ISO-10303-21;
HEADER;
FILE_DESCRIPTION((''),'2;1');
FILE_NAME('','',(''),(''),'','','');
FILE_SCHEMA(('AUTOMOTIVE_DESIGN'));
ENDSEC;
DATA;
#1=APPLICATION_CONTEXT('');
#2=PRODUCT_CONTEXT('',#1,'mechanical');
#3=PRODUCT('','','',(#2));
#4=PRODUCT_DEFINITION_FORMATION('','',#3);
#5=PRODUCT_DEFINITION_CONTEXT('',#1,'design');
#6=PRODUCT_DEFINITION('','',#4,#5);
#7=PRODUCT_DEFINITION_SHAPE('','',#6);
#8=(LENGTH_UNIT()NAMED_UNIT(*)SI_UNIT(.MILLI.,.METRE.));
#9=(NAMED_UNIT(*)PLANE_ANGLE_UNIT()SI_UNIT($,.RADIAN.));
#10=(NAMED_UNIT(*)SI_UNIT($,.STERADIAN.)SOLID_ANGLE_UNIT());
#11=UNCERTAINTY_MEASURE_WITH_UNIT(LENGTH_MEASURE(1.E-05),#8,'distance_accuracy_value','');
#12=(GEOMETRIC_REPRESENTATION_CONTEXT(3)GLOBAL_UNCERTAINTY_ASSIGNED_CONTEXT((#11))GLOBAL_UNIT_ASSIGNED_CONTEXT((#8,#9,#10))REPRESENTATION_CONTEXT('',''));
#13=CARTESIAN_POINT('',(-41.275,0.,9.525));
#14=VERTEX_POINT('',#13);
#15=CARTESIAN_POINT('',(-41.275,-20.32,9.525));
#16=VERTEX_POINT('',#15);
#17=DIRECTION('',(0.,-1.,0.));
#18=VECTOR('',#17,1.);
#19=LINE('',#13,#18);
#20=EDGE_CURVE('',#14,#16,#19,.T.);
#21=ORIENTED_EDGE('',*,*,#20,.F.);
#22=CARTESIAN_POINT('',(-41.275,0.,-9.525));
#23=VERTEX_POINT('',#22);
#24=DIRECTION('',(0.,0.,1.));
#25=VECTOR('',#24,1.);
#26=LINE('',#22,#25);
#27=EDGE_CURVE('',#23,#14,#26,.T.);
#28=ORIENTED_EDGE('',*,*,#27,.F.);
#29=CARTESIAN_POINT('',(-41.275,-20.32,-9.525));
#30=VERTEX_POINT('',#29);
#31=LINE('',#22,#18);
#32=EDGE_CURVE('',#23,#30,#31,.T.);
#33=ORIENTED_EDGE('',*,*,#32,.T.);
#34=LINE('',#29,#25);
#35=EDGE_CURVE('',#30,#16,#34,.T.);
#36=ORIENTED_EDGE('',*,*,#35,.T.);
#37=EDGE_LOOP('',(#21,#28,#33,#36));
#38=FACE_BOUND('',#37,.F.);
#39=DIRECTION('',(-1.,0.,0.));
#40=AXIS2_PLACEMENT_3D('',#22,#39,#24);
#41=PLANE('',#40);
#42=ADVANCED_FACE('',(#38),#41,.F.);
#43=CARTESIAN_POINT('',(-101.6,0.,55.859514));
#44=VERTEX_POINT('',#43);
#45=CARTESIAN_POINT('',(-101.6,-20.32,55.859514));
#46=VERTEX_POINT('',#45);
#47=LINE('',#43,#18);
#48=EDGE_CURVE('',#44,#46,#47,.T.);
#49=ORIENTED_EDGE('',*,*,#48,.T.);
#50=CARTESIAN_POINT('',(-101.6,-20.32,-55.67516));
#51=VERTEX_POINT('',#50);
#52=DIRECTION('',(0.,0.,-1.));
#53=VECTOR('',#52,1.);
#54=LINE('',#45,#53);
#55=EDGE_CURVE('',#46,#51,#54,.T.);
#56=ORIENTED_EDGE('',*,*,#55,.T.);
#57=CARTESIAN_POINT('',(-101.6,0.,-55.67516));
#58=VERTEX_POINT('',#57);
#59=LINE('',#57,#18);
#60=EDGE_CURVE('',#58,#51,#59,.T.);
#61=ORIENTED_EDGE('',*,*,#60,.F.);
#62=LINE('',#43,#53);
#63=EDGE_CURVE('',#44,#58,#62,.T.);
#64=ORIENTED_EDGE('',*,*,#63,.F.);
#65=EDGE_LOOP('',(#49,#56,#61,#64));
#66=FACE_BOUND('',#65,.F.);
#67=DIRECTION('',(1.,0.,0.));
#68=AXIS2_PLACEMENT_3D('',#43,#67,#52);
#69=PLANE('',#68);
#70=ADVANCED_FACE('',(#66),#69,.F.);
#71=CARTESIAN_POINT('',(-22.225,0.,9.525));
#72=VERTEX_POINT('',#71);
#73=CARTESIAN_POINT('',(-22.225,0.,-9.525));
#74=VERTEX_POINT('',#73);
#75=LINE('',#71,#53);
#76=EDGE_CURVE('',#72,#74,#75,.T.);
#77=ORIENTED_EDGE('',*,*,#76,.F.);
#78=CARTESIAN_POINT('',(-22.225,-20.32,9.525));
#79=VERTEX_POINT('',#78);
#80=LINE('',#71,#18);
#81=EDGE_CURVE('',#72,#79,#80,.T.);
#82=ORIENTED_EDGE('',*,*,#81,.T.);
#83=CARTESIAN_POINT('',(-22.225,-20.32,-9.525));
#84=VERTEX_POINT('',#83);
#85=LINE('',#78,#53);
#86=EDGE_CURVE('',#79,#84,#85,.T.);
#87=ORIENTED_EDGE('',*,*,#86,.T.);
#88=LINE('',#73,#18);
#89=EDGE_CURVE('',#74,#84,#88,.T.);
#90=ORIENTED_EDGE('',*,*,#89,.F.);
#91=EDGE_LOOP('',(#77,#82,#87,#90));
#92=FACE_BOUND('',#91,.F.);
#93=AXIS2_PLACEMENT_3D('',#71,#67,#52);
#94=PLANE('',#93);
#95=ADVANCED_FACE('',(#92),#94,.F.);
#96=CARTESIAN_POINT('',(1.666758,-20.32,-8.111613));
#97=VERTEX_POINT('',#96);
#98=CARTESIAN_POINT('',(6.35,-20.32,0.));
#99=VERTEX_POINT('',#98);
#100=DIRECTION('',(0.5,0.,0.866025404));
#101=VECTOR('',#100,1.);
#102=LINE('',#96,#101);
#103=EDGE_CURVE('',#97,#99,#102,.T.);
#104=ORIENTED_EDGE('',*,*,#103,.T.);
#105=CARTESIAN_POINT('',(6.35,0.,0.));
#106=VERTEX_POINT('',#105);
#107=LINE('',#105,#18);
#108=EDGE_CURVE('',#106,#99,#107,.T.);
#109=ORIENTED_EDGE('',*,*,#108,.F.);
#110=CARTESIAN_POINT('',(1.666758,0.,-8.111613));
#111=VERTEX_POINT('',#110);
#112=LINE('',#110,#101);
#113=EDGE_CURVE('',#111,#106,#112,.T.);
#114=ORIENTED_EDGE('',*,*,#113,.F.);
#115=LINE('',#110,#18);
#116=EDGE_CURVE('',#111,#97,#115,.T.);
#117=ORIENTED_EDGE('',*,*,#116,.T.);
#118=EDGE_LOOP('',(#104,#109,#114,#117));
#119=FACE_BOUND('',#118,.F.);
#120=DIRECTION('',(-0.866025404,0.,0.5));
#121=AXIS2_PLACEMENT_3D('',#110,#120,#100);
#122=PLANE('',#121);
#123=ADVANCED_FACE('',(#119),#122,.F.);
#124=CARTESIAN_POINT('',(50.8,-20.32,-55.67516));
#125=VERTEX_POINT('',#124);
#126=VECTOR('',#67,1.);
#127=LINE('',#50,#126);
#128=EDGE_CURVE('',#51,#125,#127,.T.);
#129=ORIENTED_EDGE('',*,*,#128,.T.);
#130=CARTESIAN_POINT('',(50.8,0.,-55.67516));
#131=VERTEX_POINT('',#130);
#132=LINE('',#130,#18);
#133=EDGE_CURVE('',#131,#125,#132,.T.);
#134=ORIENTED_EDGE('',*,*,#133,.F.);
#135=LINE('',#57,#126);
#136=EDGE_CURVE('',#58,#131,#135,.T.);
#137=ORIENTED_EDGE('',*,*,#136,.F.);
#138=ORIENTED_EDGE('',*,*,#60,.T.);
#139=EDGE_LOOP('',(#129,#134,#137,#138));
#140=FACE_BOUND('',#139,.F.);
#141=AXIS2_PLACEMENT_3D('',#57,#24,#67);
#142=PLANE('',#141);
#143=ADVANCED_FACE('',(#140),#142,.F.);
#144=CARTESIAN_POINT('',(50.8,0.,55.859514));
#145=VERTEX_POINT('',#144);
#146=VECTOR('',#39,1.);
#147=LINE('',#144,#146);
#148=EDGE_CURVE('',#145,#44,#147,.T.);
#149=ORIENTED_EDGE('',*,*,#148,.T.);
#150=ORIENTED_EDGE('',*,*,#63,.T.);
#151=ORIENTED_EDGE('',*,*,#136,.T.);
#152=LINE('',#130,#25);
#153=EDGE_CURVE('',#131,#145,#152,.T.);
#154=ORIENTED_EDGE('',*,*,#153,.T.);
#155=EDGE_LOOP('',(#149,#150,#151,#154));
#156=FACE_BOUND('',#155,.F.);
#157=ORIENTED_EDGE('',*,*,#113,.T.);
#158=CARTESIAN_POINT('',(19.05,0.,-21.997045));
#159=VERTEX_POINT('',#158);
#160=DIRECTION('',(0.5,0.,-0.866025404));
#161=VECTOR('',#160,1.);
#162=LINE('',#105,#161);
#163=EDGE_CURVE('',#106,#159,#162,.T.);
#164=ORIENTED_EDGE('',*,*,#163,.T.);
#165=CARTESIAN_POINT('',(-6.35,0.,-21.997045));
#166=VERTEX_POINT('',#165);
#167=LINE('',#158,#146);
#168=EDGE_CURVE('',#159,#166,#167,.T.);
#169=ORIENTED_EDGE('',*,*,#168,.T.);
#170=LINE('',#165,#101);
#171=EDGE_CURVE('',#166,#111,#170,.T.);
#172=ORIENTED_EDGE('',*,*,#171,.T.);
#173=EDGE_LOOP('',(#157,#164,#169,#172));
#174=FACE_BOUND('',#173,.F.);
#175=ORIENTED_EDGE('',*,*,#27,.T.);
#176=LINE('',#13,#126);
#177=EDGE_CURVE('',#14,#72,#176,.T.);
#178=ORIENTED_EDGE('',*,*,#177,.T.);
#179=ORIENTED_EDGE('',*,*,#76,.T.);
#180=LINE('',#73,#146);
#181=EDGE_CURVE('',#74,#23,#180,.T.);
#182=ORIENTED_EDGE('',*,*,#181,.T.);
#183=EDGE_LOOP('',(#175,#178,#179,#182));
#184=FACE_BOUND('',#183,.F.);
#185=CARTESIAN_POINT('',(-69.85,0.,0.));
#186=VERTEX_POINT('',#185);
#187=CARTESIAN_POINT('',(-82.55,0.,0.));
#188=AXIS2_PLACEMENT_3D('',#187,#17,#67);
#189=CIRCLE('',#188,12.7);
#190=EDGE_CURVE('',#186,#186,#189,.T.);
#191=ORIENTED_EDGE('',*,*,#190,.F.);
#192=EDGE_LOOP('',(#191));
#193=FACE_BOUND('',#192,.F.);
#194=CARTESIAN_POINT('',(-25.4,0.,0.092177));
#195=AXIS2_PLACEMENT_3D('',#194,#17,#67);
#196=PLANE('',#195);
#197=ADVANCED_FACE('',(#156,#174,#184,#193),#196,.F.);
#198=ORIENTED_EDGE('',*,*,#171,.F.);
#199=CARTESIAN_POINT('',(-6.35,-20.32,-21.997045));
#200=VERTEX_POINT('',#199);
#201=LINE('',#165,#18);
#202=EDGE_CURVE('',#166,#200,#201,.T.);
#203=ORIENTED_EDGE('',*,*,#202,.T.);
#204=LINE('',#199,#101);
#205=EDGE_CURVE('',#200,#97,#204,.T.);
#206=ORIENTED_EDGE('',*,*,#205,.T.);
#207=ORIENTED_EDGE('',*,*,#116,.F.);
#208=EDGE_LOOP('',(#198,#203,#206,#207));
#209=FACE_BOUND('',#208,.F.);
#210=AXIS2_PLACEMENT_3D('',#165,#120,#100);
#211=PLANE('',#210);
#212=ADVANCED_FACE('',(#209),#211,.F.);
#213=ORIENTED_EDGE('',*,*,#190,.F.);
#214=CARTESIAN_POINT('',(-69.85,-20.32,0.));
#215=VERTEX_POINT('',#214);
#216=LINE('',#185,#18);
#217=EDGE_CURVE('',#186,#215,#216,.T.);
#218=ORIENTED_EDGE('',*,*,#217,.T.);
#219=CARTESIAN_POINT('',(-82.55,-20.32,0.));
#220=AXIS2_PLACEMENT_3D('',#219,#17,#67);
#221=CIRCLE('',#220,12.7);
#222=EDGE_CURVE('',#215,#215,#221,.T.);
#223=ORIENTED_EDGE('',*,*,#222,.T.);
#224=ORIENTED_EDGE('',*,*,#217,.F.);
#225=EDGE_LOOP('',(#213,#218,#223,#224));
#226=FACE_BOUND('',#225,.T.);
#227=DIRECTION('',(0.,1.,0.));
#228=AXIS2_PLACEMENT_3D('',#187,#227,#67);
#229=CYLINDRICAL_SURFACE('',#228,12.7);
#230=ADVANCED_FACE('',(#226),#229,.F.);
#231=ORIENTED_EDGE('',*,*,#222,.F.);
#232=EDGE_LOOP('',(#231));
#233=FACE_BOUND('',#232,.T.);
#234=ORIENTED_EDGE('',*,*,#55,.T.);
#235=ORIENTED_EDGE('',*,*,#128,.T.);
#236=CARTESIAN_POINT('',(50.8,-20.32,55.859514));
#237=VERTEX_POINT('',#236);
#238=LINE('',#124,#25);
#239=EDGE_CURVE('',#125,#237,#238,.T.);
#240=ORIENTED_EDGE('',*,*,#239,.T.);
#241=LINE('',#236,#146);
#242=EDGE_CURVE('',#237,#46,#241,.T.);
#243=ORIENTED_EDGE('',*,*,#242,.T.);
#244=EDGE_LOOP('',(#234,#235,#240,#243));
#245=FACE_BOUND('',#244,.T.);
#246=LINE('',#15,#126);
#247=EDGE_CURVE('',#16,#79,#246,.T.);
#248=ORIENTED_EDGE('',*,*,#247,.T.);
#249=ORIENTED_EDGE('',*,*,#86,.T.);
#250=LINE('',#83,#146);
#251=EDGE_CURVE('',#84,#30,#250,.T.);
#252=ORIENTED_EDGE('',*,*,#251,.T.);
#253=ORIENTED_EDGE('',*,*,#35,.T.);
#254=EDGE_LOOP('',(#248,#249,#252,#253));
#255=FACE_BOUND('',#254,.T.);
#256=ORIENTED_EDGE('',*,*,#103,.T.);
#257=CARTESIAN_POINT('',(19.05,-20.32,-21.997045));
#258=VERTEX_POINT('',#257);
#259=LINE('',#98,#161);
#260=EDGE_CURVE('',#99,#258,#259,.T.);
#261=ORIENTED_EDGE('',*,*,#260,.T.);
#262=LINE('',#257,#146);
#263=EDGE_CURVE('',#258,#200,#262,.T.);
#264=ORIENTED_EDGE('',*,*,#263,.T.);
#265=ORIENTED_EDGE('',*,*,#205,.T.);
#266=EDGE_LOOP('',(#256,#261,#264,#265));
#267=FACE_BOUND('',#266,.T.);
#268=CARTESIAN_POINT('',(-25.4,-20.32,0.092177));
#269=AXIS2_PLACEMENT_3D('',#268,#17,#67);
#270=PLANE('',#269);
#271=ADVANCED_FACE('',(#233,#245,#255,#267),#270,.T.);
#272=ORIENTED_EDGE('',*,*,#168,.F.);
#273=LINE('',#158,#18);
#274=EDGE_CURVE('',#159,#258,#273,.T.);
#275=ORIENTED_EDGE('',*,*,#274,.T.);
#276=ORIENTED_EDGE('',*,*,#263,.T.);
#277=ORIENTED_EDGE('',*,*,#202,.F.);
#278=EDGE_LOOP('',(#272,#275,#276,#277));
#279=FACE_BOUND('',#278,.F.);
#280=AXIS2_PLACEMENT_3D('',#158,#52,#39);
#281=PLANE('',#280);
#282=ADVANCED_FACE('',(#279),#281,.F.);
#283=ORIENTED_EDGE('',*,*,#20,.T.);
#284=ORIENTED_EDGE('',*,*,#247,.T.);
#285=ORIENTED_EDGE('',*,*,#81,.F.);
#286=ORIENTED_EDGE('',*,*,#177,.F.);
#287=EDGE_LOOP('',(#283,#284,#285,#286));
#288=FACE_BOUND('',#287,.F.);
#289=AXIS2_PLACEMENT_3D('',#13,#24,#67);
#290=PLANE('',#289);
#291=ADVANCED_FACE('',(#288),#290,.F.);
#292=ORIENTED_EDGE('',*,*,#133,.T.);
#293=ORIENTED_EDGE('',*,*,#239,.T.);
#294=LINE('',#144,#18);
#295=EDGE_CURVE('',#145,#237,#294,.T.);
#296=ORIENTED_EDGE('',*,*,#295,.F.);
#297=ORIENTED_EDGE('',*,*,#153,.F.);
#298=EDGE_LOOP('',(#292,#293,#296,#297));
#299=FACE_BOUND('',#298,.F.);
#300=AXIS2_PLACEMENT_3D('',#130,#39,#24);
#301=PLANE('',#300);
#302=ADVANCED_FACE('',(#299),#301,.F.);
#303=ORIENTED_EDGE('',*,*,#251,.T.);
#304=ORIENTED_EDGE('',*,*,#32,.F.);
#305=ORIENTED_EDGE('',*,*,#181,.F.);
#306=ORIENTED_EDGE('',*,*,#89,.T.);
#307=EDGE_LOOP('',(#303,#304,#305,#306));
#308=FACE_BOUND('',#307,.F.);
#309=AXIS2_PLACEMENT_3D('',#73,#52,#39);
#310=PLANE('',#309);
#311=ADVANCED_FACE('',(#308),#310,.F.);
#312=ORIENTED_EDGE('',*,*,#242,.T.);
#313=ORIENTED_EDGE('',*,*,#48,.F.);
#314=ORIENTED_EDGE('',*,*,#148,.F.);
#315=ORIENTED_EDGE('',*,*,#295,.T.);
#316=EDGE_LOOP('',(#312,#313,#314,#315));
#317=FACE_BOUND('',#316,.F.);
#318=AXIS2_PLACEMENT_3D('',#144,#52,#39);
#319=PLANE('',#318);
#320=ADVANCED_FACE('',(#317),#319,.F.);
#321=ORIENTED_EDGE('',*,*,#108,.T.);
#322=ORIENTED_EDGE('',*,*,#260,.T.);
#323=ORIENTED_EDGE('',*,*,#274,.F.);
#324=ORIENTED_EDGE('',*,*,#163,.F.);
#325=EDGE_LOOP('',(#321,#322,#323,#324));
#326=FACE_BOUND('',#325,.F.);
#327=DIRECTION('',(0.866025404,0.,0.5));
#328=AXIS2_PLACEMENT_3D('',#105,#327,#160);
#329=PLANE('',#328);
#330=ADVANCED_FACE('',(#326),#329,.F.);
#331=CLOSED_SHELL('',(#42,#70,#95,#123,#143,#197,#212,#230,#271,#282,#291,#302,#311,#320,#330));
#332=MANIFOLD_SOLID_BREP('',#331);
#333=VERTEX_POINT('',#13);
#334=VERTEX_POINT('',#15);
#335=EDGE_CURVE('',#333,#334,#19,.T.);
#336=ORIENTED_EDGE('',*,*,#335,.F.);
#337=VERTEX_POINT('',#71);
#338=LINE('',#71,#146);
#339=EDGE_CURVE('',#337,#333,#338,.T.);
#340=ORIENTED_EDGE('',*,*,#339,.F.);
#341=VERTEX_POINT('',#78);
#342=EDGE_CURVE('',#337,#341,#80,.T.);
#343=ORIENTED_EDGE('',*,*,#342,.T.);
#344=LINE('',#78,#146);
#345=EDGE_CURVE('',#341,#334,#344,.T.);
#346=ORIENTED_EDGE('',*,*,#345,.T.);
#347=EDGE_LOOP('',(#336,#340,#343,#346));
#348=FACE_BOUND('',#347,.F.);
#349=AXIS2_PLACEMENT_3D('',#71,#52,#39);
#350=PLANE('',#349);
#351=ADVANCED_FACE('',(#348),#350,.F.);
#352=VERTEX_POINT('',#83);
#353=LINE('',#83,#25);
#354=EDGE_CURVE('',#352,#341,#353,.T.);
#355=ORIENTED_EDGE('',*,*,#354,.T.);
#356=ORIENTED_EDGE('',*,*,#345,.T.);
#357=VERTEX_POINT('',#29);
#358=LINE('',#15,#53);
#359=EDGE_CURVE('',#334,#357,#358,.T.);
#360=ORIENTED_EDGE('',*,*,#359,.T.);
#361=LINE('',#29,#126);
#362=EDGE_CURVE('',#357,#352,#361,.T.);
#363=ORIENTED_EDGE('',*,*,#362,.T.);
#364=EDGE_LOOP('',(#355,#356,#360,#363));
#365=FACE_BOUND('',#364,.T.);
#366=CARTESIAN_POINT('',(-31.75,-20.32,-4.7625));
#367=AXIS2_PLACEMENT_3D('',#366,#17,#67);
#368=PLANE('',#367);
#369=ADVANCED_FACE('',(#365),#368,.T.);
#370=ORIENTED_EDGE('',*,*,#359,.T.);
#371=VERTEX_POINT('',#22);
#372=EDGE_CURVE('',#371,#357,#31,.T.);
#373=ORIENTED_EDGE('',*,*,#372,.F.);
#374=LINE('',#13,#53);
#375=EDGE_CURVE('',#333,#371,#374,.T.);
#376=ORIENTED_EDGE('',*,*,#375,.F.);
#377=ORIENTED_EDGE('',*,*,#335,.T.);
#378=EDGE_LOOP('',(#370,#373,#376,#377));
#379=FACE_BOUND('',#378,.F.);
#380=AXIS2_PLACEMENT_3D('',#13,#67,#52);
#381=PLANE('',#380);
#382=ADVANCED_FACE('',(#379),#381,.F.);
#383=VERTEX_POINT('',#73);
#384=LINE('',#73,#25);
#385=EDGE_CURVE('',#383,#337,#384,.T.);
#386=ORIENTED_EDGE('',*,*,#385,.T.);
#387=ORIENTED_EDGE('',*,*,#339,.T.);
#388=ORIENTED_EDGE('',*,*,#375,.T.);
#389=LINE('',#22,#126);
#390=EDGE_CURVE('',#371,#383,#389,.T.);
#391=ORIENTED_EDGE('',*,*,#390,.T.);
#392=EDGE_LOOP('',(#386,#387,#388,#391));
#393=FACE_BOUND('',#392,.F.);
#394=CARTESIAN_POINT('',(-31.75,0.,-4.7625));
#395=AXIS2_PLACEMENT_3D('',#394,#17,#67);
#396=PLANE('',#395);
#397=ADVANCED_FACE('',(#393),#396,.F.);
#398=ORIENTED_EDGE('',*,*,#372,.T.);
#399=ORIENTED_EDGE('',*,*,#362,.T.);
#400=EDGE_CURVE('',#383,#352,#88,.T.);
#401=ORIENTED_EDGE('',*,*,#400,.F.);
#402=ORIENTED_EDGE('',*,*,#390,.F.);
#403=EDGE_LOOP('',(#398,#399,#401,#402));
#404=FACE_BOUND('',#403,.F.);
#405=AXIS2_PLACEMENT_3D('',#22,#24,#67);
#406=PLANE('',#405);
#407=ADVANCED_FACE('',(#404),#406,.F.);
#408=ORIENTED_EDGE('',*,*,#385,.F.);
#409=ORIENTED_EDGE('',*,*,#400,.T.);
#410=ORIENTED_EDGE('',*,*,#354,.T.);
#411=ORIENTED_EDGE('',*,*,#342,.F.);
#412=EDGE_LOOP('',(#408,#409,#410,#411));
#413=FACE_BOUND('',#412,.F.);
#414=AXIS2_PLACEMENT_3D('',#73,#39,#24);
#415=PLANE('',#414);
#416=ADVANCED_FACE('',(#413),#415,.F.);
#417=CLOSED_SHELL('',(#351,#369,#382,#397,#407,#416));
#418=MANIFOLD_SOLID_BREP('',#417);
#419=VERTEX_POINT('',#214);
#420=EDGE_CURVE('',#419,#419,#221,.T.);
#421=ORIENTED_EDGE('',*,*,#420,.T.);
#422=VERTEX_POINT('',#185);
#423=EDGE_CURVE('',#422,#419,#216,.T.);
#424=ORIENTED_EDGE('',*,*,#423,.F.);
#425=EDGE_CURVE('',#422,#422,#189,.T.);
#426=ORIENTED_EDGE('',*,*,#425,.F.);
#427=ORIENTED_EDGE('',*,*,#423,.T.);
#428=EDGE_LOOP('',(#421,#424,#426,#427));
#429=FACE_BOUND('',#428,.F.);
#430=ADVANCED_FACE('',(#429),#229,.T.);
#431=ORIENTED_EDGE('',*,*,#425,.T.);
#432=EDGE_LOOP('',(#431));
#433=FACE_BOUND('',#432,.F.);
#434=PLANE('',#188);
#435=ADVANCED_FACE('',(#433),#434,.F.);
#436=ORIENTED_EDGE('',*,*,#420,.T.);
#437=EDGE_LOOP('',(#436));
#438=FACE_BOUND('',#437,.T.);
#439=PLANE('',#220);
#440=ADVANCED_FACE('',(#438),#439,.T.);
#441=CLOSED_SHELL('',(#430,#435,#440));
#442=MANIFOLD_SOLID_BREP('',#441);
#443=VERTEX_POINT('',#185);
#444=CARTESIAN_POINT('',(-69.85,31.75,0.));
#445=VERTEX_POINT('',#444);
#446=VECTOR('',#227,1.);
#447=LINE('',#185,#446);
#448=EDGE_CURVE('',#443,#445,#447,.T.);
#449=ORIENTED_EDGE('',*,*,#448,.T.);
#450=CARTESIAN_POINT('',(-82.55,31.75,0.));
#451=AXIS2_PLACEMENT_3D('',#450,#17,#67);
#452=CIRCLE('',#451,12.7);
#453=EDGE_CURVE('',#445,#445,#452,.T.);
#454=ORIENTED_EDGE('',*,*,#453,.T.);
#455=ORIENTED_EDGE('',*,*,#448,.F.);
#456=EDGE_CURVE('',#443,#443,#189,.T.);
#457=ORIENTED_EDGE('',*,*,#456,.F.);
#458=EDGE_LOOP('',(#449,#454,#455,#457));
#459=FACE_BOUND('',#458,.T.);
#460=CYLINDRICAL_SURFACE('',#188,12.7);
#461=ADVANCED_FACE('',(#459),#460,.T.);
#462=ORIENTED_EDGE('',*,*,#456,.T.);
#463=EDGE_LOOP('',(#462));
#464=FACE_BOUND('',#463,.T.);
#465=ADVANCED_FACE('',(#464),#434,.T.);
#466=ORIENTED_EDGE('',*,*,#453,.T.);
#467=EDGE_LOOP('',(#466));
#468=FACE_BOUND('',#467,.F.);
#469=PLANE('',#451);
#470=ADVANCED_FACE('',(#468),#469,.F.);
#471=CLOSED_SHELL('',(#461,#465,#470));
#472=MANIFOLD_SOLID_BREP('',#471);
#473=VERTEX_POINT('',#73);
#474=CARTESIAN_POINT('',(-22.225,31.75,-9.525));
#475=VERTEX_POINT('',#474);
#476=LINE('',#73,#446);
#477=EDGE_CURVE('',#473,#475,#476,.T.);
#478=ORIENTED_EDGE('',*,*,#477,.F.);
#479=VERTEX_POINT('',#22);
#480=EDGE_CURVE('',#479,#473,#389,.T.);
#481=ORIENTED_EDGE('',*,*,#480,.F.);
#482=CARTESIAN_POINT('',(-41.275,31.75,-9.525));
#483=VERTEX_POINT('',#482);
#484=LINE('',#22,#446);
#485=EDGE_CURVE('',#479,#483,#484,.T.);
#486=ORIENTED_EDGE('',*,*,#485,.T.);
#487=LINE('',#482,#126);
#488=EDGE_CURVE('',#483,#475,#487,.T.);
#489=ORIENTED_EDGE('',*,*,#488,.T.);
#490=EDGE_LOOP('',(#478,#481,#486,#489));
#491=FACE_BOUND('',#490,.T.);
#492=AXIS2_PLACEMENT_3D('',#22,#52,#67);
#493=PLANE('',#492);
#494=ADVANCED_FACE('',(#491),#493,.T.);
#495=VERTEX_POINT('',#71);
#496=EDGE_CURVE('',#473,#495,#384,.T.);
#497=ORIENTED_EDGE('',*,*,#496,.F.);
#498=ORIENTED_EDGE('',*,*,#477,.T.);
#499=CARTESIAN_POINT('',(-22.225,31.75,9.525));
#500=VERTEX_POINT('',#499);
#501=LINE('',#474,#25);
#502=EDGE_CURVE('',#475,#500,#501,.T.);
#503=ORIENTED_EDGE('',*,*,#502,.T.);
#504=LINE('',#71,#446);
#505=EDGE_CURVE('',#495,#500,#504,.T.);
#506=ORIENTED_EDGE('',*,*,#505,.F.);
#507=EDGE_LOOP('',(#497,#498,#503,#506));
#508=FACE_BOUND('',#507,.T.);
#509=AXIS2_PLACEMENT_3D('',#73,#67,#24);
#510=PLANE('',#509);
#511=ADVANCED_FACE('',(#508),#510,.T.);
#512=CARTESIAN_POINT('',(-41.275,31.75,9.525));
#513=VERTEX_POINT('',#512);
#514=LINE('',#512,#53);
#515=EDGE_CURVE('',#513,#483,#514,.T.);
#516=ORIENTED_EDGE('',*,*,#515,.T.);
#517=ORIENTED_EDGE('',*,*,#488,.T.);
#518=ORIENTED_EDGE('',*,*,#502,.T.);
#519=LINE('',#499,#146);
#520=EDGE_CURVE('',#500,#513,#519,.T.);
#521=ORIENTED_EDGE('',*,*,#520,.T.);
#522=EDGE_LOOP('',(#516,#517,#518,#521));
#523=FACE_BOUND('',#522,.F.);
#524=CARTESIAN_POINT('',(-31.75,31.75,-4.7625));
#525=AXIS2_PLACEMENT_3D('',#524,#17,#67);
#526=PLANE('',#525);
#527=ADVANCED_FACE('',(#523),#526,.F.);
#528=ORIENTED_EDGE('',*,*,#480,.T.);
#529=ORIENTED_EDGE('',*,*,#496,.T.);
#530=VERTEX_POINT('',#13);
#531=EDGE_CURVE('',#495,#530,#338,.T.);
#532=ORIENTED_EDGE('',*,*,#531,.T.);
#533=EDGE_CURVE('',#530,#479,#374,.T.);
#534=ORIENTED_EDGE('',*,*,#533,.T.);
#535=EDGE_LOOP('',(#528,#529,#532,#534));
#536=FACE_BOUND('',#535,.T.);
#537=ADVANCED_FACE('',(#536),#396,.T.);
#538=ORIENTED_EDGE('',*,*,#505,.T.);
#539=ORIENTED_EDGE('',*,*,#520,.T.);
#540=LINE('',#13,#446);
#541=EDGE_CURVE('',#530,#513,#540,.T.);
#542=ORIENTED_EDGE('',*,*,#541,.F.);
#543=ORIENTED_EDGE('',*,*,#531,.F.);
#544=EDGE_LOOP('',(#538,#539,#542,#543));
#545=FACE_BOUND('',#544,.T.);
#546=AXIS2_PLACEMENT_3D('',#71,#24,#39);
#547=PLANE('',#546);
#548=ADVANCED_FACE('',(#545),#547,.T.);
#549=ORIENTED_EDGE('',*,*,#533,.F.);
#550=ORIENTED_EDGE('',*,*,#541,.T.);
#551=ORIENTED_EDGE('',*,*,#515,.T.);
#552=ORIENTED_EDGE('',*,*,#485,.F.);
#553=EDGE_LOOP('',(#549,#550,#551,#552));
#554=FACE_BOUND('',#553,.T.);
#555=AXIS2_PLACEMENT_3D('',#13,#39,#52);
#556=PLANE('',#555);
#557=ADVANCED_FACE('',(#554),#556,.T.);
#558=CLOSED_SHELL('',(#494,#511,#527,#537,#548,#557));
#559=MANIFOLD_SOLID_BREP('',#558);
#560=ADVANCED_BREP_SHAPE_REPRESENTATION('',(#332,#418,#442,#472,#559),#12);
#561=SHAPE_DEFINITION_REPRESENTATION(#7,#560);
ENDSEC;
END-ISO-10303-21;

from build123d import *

# Parameters (mm, degrees)
F0_R     = 12.7
F1_DEPTH = 20.32
F2_DEPTH = 31.75
F3_DEPTH = 20.32


with BuildPart() as f1:
    # F0 (on Front) → F1 (new body)
    with BuildSketch(Plane.XZ):
        Polygon((50.8, -55.6751601398), (50.8, 0), (50.8, 55.8595135808), (-101.6, 55.8595135808), (-101.6, -55.6751601398), align=None)
        with Locations((-82.55, 0)):
            Circle(F0_R, mode=Mode.SUBTRACT)
        Polygon((-22.225, 9.525), (-22.225, 0), (-22.225, -9.525), (-41.275, -9.525), (-41.275, 0), (-41.275, 9.525), align=None, mode=Mode.SUBTRACT)
        Polygon((1.6667581252, -8.1116128713), (6.35, 0), (19.05, -21.9970452561), (-6.35, -21.9970452561), align=None, mode=Mode.SUBTRACT)
    extrude(amount=F1_DEPTH)


with BuildPart() as f2:
    # F0 (on Front) → F2 (new body)
    with BuildSketch(Plane.XZ):
        with Locations((-82.55, 0)):
            Circle(F0_R)
    extrude(amount=-F2_DEPTH)


with BuildPart() as f2b:
    # F0 (on Front) → F2, piece 2 (new body)
    with BuildSketch(Plane.XZ):
        Polygon((-22.225, -9.525), (-22.225, 0), (-31.75, 0), (-41.275, 0), (-41.275, -9.525), align=None)
        Polygon((-31.75, 0), (-22.225, 0), (-22.225, 9.525), (-41.275, 9.525), (-41.275, 0), align=None)
    extrude(amount=-F2_DEPTH)


with BuildPart() as f3:
    # F3 (new): a face of the model
    f3_faces = [f2.part.faces().sort_by_distance(p)[0] for p in [
        (-82.55, 0, 0),
    ]]
    extrude(f3_faces, amount=F3_DEPTH)


with BuildPart() as f3b:
    # F3#2 (new): a face of the model
    f3_2_faces = [f2b.part.faces().sort_by_distance(p)[0] for p in [
        (-31.75, 0, 0),
    ]]
    extrude(f3_2_faces, amount=F3_DEPTH)


solid = Compound([f1.part, f2.part, f2b.part, f3.part, f3b.part])
